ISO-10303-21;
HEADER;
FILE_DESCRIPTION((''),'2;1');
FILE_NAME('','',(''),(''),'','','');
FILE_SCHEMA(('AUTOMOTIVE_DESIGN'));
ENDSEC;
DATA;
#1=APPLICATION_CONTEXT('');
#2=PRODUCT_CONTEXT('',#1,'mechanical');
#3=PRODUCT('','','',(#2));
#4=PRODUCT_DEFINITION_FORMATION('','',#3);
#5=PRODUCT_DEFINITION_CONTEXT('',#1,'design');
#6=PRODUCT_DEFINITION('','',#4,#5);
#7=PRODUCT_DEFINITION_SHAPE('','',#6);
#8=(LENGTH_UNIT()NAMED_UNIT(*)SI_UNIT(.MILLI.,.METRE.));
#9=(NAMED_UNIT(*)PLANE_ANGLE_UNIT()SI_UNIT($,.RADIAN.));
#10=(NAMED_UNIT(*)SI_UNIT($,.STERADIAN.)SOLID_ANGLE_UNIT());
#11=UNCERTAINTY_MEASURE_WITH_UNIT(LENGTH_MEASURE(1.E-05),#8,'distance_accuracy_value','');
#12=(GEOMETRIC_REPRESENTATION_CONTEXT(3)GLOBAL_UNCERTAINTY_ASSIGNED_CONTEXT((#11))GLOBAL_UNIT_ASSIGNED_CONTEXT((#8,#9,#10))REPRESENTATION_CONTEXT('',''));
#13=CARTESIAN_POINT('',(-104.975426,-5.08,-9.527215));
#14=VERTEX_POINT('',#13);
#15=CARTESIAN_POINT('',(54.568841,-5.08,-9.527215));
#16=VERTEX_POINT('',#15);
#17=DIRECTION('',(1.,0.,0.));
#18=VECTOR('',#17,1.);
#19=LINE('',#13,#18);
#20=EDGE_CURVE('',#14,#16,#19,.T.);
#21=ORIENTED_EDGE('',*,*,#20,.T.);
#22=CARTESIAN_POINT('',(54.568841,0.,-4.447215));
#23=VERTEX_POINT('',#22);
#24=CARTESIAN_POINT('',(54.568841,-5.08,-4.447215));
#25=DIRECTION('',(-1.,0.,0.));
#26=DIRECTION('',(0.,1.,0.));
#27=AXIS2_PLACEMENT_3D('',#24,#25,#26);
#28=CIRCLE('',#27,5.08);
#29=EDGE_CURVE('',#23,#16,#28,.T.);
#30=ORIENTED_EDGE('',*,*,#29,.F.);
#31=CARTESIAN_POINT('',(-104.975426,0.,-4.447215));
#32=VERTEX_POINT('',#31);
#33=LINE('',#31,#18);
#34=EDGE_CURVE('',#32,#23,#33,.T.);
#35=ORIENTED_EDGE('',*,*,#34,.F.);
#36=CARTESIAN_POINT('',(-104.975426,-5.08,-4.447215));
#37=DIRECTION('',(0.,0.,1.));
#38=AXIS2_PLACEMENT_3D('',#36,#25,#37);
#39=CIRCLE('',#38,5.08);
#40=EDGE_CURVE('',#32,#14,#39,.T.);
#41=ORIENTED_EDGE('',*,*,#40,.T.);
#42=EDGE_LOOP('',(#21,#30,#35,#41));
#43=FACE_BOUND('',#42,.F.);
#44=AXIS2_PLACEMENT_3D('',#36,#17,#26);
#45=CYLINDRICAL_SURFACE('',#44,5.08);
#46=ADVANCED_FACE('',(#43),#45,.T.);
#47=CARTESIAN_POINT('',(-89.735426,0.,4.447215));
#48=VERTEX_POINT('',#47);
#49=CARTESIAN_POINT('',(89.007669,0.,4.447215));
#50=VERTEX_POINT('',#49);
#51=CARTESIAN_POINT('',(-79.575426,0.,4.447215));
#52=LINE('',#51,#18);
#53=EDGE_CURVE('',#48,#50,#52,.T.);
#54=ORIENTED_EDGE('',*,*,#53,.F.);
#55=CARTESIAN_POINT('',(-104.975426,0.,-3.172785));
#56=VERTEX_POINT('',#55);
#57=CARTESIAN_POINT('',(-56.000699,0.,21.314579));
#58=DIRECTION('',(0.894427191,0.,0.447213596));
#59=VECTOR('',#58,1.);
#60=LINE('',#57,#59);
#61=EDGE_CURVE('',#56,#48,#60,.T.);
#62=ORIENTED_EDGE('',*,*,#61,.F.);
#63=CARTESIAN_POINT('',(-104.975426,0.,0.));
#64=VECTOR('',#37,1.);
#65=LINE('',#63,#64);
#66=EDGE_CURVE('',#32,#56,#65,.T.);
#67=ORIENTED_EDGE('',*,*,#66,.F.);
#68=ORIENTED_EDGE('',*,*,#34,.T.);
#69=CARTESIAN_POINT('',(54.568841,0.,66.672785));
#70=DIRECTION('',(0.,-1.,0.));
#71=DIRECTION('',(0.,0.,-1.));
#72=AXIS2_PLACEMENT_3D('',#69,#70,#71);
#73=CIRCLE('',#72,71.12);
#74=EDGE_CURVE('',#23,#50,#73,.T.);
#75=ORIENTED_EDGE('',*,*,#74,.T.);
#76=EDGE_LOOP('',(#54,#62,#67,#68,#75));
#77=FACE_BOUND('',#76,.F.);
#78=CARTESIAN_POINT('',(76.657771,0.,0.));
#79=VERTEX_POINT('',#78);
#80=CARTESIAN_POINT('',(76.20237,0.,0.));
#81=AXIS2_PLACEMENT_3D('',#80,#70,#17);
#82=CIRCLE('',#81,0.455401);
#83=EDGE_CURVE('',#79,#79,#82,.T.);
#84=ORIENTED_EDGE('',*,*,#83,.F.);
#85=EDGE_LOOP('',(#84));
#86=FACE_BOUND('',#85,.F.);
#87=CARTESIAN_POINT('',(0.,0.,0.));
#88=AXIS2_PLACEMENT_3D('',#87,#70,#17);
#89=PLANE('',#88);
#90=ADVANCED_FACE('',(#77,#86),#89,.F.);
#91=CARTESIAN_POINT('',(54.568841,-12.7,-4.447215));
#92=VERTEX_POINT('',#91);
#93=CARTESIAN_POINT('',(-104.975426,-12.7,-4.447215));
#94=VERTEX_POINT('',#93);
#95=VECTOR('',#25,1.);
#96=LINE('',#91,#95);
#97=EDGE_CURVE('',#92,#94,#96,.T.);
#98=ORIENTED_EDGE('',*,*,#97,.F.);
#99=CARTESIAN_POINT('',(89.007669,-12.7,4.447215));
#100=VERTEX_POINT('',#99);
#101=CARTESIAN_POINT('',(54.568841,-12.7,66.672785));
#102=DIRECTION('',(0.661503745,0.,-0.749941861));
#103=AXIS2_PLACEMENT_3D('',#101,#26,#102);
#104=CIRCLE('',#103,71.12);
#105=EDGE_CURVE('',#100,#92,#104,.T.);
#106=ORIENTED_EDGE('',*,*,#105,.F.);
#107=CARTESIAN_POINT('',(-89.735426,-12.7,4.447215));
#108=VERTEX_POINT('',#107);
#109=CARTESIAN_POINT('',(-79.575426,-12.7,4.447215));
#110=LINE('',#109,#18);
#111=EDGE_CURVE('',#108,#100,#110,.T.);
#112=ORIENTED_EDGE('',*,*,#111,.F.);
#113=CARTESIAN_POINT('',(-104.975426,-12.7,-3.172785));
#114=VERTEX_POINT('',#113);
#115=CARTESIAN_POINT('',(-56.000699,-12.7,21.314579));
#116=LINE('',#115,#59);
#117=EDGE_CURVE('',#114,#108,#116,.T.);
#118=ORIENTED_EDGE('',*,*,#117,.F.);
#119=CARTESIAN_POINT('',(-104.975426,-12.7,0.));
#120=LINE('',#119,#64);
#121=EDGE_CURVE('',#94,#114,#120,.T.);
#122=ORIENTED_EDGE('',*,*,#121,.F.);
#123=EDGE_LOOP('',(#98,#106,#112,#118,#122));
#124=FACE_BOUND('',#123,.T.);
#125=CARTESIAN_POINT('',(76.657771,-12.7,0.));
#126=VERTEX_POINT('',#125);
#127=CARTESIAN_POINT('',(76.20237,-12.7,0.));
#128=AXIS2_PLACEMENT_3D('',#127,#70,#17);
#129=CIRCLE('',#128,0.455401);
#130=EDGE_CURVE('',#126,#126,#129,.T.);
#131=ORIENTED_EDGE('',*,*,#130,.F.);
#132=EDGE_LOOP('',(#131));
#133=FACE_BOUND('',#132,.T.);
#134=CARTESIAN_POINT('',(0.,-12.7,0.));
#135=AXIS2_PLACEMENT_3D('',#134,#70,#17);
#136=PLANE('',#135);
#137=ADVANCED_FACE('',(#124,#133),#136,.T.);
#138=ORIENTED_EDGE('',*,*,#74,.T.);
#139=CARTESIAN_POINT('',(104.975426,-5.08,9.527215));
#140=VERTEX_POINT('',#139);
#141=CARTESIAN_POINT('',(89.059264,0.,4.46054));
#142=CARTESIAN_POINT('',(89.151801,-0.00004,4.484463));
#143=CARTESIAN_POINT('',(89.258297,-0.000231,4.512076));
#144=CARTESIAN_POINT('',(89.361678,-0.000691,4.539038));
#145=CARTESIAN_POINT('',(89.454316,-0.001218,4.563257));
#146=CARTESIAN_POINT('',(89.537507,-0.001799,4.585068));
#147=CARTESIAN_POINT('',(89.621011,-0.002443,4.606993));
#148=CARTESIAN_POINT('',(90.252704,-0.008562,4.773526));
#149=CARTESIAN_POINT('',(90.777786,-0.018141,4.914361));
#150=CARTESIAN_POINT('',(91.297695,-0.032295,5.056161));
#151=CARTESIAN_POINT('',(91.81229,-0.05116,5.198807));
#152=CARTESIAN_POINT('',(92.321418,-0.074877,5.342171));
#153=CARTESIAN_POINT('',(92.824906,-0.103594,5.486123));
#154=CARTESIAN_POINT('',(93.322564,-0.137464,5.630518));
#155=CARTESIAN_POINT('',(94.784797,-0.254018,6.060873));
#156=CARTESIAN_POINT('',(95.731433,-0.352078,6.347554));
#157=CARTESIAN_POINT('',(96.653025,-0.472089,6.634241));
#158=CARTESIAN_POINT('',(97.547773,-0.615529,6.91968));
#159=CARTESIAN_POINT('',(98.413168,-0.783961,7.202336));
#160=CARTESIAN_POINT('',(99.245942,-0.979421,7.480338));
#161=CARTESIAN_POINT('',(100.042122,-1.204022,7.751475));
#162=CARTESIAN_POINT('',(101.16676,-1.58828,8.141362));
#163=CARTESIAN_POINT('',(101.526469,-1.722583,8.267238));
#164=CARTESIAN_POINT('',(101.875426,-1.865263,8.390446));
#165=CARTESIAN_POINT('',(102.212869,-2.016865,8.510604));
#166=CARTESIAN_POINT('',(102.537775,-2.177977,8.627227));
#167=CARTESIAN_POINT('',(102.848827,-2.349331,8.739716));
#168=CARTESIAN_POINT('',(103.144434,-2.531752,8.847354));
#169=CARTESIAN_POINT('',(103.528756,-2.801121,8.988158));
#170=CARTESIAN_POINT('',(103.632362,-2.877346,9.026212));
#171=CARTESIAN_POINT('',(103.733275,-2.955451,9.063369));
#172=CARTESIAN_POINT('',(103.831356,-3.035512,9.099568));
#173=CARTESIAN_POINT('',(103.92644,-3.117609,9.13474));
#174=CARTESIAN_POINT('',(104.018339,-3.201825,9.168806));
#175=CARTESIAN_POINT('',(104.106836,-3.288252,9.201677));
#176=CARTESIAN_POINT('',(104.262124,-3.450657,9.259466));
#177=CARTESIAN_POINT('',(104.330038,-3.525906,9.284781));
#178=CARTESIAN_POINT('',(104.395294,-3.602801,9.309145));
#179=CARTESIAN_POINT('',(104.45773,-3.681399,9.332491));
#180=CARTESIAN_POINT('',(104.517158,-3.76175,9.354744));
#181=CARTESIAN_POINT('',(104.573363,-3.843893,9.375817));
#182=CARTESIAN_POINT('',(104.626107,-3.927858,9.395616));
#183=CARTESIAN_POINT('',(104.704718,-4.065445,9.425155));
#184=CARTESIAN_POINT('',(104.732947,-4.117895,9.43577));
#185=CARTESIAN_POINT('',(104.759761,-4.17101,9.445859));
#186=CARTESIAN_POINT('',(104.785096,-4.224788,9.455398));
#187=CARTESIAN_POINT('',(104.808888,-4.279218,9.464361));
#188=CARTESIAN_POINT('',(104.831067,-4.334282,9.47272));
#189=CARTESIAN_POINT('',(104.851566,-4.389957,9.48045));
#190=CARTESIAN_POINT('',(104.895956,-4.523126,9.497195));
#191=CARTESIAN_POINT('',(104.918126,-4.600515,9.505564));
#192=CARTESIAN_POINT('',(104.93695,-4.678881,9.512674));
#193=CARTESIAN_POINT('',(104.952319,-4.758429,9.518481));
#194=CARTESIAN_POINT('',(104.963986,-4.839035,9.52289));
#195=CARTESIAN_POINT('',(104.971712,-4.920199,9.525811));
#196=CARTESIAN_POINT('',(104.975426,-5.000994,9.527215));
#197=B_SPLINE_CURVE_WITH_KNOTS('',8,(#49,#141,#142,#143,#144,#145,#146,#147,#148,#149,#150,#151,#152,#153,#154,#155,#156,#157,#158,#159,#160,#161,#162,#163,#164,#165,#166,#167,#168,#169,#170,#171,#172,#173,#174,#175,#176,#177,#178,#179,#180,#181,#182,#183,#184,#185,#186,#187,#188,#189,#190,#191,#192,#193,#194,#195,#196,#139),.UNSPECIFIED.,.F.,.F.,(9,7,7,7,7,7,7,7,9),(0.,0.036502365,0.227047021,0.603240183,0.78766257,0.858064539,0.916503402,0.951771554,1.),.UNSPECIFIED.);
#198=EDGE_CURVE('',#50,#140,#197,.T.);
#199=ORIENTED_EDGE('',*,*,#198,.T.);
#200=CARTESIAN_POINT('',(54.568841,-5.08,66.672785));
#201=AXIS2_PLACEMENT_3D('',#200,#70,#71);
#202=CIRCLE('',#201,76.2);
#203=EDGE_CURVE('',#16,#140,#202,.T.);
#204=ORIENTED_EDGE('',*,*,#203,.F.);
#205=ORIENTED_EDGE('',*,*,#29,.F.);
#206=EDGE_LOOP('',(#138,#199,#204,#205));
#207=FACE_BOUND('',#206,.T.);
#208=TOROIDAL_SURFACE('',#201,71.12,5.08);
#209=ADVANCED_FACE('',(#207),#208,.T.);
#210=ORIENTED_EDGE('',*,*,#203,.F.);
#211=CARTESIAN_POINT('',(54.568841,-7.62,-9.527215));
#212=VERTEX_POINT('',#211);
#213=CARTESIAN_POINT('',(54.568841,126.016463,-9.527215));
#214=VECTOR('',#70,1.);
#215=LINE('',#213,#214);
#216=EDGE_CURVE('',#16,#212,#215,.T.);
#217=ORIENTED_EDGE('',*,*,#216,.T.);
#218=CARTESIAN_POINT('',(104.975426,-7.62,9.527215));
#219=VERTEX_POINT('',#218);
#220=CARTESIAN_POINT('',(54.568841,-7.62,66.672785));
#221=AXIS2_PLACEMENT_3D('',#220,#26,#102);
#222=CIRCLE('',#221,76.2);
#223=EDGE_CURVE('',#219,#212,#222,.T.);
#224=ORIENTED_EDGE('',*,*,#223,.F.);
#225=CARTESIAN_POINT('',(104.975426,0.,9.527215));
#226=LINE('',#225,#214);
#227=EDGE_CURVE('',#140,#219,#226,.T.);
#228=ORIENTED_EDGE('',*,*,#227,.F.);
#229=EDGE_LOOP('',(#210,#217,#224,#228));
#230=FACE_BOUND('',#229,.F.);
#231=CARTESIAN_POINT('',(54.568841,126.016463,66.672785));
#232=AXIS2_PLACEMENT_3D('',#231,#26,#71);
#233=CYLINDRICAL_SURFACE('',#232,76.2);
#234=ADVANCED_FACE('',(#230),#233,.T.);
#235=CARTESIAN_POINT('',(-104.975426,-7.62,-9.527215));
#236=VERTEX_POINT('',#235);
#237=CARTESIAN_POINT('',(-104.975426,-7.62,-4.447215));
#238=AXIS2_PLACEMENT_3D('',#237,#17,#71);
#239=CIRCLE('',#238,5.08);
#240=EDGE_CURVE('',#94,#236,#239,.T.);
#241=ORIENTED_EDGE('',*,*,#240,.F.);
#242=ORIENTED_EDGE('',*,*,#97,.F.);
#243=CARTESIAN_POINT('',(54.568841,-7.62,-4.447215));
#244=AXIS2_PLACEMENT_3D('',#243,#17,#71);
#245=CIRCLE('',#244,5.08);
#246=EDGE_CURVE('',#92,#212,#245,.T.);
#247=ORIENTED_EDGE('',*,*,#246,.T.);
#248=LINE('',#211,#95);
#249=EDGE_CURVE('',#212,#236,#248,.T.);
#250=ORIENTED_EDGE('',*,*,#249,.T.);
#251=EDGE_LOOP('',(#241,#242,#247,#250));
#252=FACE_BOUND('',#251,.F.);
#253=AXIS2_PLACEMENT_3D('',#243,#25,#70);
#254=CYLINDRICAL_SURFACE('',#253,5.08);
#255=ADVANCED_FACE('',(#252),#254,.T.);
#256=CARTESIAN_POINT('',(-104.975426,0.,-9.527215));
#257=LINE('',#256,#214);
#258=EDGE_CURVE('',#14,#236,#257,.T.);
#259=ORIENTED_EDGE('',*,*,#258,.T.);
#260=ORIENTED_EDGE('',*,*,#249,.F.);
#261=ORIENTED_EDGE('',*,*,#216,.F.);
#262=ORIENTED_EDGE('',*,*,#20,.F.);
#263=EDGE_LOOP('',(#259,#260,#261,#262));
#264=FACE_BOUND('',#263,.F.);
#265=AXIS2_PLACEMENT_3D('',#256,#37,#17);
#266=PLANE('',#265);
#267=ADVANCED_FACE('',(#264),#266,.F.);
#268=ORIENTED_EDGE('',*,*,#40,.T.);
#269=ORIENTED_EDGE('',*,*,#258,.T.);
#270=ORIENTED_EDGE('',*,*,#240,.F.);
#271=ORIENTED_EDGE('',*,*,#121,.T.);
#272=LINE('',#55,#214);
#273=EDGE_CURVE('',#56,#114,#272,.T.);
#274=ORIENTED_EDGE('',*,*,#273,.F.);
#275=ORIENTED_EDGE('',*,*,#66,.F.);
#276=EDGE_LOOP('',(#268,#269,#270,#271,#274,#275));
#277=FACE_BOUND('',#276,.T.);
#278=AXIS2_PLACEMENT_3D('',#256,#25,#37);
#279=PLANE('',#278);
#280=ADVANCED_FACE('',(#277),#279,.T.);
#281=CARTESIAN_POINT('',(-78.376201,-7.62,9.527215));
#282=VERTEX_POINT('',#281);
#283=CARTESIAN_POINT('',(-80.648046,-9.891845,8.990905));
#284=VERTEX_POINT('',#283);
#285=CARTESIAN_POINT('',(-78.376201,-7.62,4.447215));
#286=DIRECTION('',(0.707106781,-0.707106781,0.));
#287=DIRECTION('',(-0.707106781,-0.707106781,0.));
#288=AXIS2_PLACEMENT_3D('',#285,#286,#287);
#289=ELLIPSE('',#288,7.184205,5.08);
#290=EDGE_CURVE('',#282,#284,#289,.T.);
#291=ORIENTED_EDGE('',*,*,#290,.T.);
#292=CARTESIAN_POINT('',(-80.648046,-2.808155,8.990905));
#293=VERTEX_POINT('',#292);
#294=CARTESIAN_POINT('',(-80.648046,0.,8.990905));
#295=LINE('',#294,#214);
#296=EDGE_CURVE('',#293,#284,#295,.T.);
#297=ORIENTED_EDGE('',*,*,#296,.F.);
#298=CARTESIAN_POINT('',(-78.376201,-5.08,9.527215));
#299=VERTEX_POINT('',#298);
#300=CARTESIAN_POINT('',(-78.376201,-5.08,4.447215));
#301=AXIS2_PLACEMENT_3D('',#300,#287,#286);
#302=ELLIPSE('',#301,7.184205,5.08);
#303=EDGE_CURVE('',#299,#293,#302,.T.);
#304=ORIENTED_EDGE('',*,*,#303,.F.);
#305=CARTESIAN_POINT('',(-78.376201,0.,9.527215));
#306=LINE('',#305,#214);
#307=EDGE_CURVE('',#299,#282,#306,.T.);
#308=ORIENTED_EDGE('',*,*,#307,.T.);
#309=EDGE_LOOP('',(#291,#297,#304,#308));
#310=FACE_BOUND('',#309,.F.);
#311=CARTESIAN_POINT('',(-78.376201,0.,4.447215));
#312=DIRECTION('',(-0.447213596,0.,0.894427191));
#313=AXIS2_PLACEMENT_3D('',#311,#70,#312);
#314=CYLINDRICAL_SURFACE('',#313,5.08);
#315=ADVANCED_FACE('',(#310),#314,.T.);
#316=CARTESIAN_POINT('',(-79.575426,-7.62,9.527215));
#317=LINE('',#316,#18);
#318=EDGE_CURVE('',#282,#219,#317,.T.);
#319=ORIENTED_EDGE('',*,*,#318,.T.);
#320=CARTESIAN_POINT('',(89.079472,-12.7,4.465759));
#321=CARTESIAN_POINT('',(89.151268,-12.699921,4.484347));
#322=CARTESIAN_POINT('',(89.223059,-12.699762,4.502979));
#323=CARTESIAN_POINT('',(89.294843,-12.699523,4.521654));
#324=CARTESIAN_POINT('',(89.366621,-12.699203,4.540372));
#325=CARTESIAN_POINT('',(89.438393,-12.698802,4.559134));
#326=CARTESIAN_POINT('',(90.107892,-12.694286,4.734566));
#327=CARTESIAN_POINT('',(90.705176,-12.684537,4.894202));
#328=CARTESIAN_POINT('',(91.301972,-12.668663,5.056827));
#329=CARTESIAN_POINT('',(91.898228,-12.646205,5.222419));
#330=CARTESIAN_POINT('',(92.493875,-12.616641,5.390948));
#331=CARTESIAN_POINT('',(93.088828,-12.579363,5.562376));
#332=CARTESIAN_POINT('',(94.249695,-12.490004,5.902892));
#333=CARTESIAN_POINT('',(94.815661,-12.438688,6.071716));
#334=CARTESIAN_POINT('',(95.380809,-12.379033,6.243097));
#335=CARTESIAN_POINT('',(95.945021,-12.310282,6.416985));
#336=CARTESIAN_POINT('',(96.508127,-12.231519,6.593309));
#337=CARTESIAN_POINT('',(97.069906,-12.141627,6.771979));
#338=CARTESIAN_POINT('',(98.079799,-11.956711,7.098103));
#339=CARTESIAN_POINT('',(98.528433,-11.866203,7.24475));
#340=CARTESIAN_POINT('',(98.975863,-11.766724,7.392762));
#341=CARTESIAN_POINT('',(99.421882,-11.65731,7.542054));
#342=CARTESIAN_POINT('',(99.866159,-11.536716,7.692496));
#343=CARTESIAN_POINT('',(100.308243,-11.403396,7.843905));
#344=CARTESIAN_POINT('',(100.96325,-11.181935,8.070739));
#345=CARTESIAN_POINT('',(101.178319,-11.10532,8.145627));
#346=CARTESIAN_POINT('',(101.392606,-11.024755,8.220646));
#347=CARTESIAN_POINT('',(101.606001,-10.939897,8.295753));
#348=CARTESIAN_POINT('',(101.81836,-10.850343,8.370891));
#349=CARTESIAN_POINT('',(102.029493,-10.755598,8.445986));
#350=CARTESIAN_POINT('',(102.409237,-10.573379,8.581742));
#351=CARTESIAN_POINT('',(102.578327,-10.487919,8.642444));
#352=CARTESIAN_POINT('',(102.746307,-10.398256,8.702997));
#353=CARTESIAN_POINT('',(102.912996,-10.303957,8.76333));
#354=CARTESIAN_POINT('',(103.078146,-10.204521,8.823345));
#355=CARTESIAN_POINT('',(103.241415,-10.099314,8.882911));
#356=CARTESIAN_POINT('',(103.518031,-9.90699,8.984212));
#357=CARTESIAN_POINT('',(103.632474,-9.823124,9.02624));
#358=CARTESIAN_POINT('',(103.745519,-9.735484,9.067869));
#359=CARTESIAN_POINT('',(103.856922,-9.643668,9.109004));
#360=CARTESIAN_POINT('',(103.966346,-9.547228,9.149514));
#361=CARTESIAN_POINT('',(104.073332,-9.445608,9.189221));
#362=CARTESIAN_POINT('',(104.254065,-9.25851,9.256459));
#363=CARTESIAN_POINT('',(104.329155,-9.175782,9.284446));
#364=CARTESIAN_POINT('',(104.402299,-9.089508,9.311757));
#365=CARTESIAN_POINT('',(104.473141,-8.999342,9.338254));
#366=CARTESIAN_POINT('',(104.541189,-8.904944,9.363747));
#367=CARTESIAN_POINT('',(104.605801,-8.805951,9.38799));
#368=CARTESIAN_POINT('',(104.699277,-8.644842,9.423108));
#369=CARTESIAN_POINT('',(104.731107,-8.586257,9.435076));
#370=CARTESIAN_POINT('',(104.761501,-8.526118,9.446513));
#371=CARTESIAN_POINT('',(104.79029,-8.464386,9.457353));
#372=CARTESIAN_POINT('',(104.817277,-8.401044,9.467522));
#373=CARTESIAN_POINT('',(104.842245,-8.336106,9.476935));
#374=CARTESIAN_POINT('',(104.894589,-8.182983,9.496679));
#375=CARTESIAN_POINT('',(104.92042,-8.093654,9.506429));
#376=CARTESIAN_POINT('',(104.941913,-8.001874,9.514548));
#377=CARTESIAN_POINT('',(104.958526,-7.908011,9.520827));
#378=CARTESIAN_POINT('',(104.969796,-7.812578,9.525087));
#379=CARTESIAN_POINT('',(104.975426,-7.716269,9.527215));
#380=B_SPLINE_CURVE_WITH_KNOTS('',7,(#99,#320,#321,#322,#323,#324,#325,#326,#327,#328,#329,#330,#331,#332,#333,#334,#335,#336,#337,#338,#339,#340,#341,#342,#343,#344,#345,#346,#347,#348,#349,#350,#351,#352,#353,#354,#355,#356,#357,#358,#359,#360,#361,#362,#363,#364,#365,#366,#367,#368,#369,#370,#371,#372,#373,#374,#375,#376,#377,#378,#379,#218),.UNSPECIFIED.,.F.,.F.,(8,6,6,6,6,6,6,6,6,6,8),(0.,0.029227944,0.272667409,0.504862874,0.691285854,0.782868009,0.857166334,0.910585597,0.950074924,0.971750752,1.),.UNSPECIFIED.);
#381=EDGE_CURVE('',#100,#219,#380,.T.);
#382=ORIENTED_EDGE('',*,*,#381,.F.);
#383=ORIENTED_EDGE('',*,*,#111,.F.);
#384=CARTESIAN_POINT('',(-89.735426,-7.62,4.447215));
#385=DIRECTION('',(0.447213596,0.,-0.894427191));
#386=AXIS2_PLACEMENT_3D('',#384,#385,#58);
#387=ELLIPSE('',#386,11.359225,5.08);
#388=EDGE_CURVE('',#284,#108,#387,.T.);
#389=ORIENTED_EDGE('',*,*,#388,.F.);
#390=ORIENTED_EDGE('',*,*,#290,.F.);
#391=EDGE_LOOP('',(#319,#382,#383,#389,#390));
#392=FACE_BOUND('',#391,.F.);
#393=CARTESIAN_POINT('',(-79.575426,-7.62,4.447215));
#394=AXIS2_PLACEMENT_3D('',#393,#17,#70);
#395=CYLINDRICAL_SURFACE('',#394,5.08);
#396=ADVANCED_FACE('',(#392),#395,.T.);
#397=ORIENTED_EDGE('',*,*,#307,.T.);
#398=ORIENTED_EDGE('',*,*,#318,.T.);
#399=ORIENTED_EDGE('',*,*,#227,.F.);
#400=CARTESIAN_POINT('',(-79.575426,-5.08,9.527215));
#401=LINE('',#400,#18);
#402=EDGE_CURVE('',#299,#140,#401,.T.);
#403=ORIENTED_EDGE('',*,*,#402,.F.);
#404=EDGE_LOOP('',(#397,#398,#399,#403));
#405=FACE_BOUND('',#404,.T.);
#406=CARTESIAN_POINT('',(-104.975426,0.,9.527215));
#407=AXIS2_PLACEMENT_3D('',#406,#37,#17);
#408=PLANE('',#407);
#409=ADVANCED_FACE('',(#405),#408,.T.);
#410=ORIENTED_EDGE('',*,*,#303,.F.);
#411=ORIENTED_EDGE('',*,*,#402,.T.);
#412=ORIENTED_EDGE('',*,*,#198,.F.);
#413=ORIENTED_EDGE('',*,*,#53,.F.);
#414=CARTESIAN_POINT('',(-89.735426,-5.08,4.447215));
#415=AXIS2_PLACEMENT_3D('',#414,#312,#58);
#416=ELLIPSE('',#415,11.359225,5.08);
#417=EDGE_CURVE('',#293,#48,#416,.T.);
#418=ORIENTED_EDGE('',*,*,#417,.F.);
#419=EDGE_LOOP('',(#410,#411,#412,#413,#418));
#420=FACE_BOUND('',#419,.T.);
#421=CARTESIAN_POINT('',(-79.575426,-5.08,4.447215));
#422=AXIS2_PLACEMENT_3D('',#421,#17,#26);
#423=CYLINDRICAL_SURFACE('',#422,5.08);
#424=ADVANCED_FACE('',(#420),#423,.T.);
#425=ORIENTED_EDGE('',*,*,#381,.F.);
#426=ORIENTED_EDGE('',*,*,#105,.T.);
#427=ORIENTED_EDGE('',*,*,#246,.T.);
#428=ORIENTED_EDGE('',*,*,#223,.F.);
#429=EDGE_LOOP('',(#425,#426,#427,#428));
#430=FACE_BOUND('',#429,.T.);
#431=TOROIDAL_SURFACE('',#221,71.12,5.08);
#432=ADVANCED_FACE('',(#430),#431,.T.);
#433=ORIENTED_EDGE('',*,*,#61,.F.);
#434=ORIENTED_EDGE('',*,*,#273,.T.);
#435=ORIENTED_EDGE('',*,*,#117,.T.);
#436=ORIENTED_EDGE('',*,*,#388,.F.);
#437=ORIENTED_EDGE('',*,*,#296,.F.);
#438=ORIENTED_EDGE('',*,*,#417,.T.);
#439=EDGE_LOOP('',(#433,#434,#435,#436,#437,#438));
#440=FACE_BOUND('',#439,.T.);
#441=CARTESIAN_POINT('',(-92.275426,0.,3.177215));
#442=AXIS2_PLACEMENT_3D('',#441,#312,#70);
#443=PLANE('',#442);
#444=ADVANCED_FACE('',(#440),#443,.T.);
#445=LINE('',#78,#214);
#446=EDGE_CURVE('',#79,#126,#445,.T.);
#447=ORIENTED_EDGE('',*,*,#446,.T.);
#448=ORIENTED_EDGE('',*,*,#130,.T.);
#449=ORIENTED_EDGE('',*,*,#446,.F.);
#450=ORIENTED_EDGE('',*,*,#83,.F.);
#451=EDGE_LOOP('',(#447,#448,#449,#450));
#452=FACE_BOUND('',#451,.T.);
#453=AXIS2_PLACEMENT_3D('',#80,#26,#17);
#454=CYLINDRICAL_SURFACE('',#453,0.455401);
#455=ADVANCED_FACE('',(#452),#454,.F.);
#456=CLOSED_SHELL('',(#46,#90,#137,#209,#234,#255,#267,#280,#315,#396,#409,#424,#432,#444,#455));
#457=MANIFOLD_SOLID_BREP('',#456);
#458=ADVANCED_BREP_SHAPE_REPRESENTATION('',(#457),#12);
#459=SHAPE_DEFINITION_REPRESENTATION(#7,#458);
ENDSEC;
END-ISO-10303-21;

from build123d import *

# Parameters (mm, degrees)
F0_W        = 209.9508528371
F0_H        = 19.0544301776
F0_R        = 0.4554012186
F1_DEPTH    = 12.7
F2_T1_DEPTH = 264.7329269001
F3_SIZE2    = 25.4
F3_SIZE     = 12.7
F4_R        = 5.08


# Not quite as in the source:
# - a fillet or chamfer that OpenCascade refuses, or shapes differently, is made with other operations: its cross-section is extruded or revolved along the edge and cut away or added


with BuildPart() as f1:
    # F0 (on Front) → F1 (new body)
    with BuildSketch(Plane.XZ):
        Rectangle(F0_W, F0_H)
        with Locations((76.2023702264, 0)):
            Circle(F0_R, mode=Mode.SUBTRACT)
    extrude(amount=F1_DEPTH)

    # F2: fillet of radius 76.2 on 1 edges, made by hand

    # F2_s2 → F2_t1 (cut)
    with BuildSketch(Plane.XZ.offset(-126.0164634501)):
        with BuildLine():
            ThreePointArc((54.5688410385, -9.5272150888), (81.5127418283, -4.6046042822), (104.9754264186, 9.5272150888))
            Line((104.9754264186, 9.5272150888), (104.9754264186, -9.5272150888))
            Line((104.9754264186, -9.5272150888), (54.5688410385, -9.5272150888))
        make_face()
    extrude(amount=F2_T1_DEPTH, mode=Mode.SUBTRACT)

    # F3
    f3_edges = [f1.edges().sort_by_distance(p)[0] for p in [
        (-104.975426, -6.35, 9.527215),
    ]]
    f3_side = f1.faces().sort_by_distance((-104.975426, -6.35, 0))[0]
    chamfer(f3_edges, length=F3_SIZE, length2=F3_SIZE2, reference=f3_side)

    # F4
    f4_edges = [f1.edges().sort_by_distance(p)[0] for p in [
        (81.512742, -12.7, -4.604604),
        (12.7, -12.7, 9.527215),
        (12.7, 0, 9.527215),
        (-25.203293, 0, -9.527215),
        (-79.575426, -6.35, 9.527215),
        (-25.203293, -12.7, -9.527215),
        (81.512742, 0, -4.604604),
    ]]
    fillet(f4_edges, radius=F4_R)


solid = f1.part
